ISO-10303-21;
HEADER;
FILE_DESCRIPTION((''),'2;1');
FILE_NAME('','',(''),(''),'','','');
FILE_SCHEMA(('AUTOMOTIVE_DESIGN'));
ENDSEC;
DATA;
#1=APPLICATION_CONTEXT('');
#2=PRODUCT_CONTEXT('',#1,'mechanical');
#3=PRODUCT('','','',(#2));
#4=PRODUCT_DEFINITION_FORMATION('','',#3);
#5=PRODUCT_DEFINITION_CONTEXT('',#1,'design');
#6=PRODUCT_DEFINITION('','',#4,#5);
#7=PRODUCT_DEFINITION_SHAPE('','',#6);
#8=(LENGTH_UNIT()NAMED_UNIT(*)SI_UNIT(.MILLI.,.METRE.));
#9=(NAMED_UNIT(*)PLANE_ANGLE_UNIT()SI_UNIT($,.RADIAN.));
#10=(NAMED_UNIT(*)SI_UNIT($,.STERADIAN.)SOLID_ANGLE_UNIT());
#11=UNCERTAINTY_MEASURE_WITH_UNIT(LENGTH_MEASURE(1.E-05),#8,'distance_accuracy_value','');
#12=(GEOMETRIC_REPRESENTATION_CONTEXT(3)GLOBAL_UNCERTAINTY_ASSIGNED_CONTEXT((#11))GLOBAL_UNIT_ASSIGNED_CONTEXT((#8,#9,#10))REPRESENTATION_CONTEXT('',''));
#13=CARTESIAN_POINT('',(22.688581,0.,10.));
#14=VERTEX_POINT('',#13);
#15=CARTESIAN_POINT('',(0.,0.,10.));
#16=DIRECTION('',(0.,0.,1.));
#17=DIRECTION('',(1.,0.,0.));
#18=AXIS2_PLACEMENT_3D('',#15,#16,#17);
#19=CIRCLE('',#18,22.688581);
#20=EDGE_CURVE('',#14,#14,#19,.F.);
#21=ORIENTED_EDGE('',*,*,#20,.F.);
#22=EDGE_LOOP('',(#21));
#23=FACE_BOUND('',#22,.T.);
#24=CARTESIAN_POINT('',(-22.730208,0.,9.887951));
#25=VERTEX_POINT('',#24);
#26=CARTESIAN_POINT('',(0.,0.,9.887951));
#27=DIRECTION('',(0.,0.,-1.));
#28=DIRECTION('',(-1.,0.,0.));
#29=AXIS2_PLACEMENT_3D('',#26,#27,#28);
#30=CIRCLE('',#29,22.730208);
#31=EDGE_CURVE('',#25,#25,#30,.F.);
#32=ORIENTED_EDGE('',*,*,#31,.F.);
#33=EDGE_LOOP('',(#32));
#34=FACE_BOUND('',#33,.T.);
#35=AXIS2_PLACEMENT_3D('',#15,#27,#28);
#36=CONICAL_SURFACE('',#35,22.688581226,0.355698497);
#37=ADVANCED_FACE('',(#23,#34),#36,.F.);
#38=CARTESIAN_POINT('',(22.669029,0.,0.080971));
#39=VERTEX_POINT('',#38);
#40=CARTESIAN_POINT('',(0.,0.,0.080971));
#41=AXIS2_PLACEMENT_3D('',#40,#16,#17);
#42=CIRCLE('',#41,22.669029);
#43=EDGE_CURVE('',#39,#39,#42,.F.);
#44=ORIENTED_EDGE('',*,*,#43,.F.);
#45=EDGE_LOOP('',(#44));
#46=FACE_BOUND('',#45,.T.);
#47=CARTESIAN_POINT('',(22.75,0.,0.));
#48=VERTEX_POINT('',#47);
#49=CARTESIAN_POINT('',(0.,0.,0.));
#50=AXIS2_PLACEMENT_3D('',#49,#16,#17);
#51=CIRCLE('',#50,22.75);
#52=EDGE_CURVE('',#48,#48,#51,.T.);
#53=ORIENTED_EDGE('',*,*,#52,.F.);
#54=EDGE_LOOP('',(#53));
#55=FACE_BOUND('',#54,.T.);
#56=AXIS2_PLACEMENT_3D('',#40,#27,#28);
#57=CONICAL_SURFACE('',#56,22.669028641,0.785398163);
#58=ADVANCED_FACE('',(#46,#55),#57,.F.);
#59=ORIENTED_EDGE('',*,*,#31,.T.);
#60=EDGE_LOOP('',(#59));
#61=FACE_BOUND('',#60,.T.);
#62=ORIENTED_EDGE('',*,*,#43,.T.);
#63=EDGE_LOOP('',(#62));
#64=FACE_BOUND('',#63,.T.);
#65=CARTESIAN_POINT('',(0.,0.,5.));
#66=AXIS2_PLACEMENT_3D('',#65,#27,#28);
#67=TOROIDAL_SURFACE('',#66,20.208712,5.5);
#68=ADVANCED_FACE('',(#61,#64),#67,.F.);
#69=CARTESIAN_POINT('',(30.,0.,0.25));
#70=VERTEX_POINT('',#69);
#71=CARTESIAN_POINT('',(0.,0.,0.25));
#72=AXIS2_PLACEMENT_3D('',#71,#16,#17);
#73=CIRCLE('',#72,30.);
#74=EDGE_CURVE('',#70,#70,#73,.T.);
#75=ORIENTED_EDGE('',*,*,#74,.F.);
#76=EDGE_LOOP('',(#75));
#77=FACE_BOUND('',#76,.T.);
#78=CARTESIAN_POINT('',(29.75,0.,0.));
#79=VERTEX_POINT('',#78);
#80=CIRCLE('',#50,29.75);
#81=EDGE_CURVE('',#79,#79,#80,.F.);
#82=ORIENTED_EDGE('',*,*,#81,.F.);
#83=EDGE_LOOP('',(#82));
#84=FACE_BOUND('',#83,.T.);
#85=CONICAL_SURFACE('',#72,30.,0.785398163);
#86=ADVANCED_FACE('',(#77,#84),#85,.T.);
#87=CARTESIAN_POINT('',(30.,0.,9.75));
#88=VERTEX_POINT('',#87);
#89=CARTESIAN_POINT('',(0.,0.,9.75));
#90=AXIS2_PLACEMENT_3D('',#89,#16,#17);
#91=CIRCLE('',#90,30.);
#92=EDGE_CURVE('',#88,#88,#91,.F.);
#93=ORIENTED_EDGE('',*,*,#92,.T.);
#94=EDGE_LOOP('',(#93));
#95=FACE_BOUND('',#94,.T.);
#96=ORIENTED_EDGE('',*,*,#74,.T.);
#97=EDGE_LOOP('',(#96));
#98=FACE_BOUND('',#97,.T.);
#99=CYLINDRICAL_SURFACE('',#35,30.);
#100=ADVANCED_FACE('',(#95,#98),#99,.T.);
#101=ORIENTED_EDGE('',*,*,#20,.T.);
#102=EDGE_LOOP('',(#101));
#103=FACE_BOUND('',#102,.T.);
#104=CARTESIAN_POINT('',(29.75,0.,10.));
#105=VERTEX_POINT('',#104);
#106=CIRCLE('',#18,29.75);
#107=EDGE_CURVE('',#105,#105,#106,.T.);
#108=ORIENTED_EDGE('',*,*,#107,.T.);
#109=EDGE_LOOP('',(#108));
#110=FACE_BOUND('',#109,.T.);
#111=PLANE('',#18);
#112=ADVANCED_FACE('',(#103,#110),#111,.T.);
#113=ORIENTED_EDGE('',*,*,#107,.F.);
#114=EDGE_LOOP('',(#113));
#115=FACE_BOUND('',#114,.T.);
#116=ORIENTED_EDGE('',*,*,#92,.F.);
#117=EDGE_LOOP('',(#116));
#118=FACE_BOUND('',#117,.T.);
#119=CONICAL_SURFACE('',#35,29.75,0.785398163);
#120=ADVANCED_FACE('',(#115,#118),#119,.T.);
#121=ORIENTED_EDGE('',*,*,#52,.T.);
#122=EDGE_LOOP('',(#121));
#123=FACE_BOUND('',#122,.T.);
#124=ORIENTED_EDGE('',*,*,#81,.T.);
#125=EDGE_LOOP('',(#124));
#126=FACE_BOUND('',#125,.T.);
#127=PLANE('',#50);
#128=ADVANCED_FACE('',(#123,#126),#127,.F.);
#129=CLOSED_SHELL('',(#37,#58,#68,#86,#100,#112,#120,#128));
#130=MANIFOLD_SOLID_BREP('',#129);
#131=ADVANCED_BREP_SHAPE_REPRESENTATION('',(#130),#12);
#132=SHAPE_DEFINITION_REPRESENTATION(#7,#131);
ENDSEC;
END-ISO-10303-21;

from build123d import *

# Parameters (mm, degrees)
SKETCH1_R                         = 30
BEARING_DIAMETER_DEPTH            = 10
BEARING_INNER_DIAMETER_DEPTH      = 44.588989435
BEARING_INNER_DIAMETER_DEPTH_BACK = 44.588989435
SKETCH2_R                         = 22.5
CHAMFER1_SIZE                     = 0.25
CHAMFER1_SIZE_2                   = 0.188581226


with BuildPart() as part:
    # Sketch1 → Bearing Diameter (new body)
    with BuildSketch(Plane.XY):
        Circle(SKETCH1_R)
    extrude(amount=BEARING_DIAMETER_DEPTH)

    # Sketch2 → Bearing Inner Diameter (cut, two sides: drawn at the far end of the back side and taken through both)
    with BuildSketch(Plane.XY.offset(10).offset(-BEARING_INNER_DIAMETER_DEPTH_BACK)):
        Circle(SKETCH2_R)
    extrude(amount=BEARING_INNER_DIAMETER_DEPTH + BEARING_INNER_DIAMETER_DEPTH_BACK, mode=Mode.SUBTRACT)

    # Sketch3 → Cut-Revolve2 (revolve, cut)
    with BuildSketch(Plane(origin=(0, 0, 0), x_dir=(1, 0, 0), z_dir=(0, 1, 0))):
        with BuildLine():
            Line((-22.5, 0), (-22.5, -10))
            ThreePointArc((-22.5, -10), (-25.708712153, -5), (-22.5, 0))
        make_face()
    revolve(axis=Axis((0, 0, 0), (0, 0, 1)), mode=Mode.SUBTRACT)

    # Chamfer1
    # the kernel refuses this chamfer: 0.25, 0.188581226 mm, written as the material it takes off along each edge
    with BuildSketch(Plane(origin=(0, 0, 0), x_dir=(-1, 0, 0), z_dir=(0, 1, 0))) as chamfer1_piece_1:
        with BuildLine():
            Line((22.669028641, 0.080971359), (22.5 + CHAMFER1_SIZE, 0))
            Line((22.5 + CHAMFER1_SIZE, 0), (22.5, 0))
            ThreePointArc((22.5, 0), (22.583359545, 0.039047495), (22.669028641, 0.080971359))
        make_face()
    revolve(axis=Axis((0, 0, 0), (0, 0, 1)), mode=Mode.SUBTRACT)
    with BuildSketch(Plane(origin=(0, 0, 10), x_dir=(-1, 0, 0), z_dir=(0, -1, 0))) as chamfer1_piece_2:
        with BuildLine():
            Line((22.5 + CHAMFER1_SIZE_2 * 0.999999998985, 0), (22.730207565, 0.112049419))
            ThreePointArc((22.730207565, 0.112049419), (22.619010369, 0.056270385), (22.5, 0))
            Line((22.5, 0), (22.5 + CHAMFER1_SIZE_2 * 0.999999998985, 0))
        make_face()
    revolve(axis=Axis((0, 0, 10), (0, 0, -1)), mode=Mode.SUBTRACT)
    with BuildSketch(Plane(origin=(0, 0, 0), x_dir=(1, 0, 0), z_dir=(0, -1, 0))) as chamfer1_piece_3:
        Polygon((30, CHAMFER1_SIZE), (30 - CHAMFER1_SIZE, 0), (30, 0), align=None)
    revolve(axis=Axis((0, 0, 0), (0, 0, 1)), mode=Mode.SUBTRACT)
    with BuildSketch(Plane(origin=(0, 0, 10), x_dir=(1, 0, 0), z_dir=(0, -1, 0))) as chamfer1_piece_4:
        Polygon((30, -CHAMFER1_SIZE), (30 - CHAMFER1_SIZE, 0), (30, 0), align=None)
    revolve(axis=Axis((0, 0, 10), (0, 0, 1)), mode=Mode.SUBTRACT)


solid = part.part
